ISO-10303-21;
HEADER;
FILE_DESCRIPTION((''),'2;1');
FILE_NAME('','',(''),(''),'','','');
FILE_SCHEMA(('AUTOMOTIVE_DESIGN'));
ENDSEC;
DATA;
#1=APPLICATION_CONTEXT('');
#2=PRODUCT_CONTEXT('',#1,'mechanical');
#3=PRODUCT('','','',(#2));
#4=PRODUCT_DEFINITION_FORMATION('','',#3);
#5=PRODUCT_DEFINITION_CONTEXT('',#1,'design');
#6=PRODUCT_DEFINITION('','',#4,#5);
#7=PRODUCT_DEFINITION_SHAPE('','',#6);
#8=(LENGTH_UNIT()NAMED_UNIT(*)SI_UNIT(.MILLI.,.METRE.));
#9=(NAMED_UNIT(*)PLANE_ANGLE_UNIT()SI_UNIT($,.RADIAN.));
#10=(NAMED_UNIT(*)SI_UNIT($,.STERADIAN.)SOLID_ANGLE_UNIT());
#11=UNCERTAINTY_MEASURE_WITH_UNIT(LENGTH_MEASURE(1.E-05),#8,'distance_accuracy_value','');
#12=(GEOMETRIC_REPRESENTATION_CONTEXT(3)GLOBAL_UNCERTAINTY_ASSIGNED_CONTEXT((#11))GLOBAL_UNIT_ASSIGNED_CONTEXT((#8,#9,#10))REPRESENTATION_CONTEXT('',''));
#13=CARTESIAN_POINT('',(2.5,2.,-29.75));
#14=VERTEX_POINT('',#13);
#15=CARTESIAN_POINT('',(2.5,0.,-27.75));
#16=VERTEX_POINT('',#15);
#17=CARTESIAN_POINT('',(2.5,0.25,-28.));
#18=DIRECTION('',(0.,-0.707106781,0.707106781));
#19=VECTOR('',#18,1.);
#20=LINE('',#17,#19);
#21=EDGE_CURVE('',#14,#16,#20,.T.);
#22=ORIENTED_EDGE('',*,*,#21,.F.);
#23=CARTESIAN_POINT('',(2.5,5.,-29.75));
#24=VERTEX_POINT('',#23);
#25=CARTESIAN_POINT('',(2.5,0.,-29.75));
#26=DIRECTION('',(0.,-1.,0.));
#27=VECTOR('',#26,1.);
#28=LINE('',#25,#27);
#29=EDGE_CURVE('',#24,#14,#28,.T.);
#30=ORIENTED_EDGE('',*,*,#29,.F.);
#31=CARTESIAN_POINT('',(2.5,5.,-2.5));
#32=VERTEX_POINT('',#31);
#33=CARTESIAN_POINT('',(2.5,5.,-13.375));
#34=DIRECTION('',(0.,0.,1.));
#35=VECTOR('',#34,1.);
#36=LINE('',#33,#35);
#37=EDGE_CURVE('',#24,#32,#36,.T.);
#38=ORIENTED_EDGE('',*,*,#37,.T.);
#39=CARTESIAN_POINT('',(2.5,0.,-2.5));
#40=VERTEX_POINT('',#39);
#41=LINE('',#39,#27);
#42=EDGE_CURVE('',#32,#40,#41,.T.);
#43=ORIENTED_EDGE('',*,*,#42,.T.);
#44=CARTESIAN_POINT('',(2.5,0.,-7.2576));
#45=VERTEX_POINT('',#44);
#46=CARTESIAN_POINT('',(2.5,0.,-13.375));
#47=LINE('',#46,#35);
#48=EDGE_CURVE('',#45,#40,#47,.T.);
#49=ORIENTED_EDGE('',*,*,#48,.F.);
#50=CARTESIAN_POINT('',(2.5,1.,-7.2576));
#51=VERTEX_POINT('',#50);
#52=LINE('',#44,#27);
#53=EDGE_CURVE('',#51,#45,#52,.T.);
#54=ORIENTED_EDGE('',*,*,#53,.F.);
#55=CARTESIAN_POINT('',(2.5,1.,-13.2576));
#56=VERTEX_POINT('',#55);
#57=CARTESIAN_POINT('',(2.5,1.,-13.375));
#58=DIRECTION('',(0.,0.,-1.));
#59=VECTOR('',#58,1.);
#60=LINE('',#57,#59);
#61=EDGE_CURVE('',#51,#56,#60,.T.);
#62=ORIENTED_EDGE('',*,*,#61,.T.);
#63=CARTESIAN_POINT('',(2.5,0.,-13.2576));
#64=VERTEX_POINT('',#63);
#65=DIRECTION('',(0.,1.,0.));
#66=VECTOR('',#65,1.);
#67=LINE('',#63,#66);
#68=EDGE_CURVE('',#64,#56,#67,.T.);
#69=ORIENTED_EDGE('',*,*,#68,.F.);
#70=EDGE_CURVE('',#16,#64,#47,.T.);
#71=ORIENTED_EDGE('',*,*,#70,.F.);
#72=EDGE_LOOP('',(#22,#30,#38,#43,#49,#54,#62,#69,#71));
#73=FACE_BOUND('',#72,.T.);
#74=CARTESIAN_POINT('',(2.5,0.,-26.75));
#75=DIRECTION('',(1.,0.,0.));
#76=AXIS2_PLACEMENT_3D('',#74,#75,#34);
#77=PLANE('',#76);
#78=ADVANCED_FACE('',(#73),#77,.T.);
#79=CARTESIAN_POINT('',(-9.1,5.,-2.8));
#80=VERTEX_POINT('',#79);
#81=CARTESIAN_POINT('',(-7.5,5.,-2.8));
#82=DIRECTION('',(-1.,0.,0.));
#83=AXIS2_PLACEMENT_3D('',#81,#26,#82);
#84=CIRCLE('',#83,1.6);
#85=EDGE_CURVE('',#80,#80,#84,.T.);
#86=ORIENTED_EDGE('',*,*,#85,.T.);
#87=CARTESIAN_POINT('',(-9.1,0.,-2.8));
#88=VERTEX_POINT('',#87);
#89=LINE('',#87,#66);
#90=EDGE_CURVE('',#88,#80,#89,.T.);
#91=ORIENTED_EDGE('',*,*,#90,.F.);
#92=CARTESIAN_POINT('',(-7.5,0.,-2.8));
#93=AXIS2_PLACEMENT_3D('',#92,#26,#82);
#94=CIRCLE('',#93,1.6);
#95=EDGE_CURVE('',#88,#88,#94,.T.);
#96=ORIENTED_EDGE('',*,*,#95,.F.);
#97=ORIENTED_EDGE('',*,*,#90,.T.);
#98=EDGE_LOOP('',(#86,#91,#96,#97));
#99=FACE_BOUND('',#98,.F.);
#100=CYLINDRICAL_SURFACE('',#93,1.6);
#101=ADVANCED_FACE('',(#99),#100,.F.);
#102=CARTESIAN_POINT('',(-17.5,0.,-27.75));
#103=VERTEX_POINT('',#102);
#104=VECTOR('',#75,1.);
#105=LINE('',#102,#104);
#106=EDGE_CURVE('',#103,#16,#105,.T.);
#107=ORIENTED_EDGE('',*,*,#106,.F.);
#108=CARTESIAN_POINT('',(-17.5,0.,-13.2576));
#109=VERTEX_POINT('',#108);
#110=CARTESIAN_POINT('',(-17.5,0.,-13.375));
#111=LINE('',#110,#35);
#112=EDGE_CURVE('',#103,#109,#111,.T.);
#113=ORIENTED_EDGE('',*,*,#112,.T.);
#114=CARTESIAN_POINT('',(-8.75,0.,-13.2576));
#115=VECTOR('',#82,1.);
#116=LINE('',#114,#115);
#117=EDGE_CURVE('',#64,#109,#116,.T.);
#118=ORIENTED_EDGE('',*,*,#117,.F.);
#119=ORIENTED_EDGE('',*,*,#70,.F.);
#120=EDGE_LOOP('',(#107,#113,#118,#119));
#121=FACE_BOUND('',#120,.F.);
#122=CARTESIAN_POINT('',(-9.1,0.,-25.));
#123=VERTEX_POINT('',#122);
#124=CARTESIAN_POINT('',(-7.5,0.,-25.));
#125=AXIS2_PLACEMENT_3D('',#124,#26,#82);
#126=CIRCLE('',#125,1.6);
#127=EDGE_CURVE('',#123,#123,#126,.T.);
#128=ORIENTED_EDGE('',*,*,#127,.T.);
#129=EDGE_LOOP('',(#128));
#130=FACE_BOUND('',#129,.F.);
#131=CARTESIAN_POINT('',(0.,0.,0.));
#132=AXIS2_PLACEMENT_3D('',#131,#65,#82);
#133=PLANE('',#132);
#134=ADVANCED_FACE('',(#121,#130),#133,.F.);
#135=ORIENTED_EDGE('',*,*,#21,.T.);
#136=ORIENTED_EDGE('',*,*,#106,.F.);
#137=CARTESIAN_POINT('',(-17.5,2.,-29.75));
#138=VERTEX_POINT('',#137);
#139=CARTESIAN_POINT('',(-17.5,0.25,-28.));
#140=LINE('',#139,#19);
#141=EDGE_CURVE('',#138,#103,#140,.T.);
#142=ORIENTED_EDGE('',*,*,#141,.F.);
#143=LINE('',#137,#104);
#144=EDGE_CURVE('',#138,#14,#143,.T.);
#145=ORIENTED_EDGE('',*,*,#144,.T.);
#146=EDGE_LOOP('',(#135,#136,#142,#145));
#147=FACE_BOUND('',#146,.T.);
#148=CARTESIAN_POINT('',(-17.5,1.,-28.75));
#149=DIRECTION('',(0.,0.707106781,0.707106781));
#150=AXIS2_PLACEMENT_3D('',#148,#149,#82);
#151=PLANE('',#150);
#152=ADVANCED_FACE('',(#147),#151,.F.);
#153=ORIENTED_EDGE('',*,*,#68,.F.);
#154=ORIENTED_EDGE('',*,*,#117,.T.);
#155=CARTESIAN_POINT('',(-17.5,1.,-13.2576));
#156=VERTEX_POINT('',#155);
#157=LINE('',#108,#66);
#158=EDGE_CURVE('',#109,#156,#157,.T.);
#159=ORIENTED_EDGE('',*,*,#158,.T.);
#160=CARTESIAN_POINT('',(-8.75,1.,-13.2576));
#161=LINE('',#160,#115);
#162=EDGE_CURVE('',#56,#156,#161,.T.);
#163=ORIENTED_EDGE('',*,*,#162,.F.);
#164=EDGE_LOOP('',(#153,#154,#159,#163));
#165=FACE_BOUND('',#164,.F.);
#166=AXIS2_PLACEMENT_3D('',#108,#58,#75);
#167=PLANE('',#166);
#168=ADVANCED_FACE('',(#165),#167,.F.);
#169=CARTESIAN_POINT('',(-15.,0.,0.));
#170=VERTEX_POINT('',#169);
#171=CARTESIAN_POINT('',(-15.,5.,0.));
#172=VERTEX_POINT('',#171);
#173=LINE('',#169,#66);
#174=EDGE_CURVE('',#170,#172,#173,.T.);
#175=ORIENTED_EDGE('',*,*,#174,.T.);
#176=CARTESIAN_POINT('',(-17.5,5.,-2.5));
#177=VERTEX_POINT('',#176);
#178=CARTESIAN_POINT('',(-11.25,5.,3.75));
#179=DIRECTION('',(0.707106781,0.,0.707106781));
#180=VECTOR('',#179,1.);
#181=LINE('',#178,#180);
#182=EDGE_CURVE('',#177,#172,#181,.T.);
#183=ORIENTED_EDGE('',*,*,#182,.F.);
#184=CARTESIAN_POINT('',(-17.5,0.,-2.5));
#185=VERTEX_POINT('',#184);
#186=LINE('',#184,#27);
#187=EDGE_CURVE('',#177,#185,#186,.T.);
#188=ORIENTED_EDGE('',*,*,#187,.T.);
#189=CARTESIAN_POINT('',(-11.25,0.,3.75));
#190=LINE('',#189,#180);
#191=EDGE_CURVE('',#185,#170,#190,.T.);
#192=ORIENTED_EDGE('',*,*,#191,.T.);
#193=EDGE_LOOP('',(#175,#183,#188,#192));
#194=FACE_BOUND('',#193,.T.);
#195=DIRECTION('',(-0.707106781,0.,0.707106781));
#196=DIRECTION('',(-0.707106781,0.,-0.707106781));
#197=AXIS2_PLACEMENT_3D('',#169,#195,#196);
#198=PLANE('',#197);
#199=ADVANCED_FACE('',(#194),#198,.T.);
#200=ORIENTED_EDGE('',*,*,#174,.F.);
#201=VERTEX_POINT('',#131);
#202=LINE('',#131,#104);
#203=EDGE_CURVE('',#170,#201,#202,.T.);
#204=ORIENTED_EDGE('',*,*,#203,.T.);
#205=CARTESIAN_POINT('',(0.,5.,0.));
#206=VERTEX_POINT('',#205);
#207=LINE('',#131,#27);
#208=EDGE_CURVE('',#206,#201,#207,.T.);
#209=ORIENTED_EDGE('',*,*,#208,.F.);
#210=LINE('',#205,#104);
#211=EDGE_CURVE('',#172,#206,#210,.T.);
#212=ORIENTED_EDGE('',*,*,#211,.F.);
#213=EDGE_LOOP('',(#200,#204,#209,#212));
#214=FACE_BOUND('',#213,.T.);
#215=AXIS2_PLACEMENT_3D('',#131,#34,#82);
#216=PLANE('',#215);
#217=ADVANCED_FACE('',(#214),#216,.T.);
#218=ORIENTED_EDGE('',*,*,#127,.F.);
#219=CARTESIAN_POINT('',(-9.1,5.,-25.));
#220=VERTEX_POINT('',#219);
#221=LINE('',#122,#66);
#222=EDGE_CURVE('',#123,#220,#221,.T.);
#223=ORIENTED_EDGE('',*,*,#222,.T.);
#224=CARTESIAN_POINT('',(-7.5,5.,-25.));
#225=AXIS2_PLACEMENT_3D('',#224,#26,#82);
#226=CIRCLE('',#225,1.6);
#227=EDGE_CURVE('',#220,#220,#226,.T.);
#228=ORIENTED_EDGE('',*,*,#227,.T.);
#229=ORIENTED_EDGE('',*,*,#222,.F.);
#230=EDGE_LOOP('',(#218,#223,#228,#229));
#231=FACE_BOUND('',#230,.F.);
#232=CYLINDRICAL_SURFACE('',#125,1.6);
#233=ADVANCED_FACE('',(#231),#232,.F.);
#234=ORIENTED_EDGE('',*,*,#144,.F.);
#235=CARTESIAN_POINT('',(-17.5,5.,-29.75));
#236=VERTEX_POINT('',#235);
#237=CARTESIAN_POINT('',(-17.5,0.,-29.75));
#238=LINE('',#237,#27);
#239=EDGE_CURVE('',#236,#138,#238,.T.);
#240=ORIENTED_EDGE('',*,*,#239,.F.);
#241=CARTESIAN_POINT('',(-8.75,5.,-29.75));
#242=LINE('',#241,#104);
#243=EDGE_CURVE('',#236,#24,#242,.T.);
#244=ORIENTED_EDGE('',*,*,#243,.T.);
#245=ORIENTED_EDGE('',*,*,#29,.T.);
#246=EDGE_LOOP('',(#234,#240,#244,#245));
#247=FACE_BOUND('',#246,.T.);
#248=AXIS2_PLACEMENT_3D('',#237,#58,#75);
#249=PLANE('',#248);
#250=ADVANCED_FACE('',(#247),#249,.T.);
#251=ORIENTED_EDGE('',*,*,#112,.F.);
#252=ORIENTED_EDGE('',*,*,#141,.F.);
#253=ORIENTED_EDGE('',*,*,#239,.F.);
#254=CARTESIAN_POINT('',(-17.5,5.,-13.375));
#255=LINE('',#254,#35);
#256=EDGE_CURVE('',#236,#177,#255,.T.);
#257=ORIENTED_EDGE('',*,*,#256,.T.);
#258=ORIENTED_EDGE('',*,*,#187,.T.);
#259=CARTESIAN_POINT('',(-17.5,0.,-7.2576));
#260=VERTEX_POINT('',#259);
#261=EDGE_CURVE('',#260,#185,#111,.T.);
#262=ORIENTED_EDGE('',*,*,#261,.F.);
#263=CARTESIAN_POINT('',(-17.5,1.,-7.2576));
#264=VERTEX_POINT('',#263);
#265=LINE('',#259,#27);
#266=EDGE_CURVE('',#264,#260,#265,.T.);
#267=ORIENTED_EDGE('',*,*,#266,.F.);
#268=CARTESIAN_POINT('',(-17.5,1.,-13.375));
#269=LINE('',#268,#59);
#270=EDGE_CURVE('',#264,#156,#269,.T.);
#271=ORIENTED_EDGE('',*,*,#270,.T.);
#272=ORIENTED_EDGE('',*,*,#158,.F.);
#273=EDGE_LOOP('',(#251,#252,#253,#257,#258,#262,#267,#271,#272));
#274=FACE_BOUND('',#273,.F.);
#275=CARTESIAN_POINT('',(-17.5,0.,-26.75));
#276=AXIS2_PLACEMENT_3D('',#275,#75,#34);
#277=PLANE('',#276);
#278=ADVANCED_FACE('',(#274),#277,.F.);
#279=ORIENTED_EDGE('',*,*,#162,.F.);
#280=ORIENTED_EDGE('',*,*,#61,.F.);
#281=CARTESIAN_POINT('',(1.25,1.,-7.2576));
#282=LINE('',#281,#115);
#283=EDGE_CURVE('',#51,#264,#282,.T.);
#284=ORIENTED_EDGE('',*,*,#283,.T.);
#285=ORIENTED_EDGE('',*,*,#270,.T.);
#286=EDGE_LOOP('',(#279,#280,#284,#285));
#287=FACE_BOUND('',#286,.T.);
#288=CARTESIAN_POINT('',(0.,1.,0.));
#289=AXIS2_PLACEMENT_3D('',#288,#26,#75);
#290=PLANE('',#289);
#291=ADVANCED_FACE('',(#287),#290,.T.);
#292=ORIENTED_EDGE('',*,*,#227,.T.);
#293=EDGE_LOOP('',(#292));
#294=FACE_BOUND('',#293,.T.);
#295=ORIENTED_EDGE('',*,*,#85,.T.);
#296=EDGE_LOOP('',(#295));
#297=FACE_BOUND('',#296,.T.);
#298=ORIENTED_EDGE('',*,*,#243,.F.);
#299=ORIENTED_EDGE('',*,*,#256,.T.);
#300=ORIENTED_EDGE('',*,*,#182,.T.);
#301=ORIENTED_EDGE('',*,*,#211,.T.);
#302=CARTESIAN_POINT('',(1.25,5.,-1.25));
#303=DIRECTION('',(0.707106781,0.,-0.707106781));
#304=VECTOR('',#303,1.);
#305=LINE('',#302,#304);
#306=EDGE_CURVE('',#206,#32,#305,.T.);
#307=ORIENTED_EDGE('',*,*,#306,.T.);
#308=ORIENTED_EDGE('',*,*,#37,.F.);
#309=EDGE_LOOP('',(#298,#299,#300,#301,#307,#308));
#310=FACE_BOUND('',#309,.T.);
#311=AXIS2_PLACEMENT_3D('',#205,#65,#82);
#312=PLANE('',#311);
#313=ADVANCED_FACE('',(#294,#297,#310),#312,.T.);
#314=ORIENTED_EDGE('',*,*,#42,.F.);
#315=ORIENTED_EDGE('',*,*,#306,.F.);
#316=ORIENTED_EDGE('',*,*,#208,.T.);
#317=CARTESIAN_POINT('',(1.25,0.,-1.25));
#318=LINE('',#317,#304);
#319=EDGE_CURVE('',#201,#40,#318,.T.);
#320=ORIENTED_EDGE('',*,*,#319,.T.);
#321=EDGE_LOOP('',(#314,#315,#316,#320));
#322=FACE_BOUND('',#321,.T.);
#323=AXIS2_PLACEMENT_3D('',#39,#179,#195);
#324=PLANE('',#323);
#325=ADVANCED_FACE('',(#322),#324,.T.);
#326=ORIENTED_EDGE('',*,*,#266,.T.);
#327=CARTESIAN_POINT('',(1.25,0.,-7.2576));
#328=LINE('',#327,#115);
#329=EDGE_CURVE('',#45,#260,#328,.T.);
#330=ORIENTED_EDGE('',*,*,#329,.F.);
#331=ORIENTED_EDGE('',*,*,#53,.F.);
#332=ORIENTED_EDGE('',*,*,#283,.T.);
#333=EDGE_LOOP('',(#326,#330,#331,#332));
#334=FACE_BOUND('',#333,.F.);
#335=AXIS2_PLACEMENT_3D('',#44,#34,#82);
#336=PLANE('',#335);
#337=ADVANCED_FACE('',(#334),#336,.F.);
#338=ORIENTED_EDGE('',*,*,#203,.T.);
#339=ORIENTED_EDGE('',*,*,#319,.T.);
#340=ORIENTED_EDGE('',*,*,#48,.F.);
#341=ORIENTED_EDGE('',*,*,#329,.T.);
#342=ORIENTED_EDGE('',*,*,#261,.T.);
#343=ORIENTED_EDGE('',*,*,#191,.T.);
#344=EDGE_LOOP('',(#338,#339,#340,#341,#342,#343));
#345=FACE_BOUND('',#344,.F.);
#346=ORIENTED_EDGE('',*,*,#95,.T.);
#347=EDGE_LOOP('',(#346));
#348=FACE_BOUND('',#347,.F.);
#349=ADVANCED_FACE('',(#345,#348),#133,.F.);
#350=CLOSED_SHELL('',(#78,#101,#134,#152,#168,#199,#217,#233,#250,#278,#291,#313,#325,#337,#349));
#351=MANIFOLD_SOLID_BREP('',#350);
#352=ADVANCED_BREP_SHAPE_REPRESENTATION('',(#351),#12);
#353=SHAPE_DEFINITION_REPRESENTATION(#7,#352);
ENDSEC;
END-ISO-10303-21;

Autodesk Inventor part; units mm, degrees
ref_plane "YZ Plane" through (0, 0, 0) normal (1, 0, 0) x (0, 1, 0)
ref_plane "XZ Plane" through (0, 0, 0) normal (0, 1, 0) x (-1, 0, 0)
ref_plane "XY Plane" through (0, 0, 0) normal (0, 0, 1) x (1, 0, 0)
sketch "Эскиз1" plane through (0, 0, 0) normal (0, 1, 0) x (-1, 0, 0)
  line L0 (17.5, -26.75) -> (-2.5, -26.75)
  line L1 (17.5, -26.75) -> (17.5, -2.5)
  line L2 (15, 0) -> (17.5, -2.5)
  line L3 (0, 0) -> (15, 0)
  line L4 (-2.5, -2.5) -> (0, 0)
  line L5 (-2.5, -26.75) -> (-2.5, -2.5)
  circle A0 centre (7.5, -2.8) radius 1.6
  circle A1 centre (7.5, -25) radius 1.6
  point P0 (7.5, -40)
extrude "Выдавливание1" add sketch "Эскиз1" along normal blind 5
sketch "Эскиз2" plane through (0, 0, 0) normal (0, -1, 0) x (1, 0, 0)
  line L0 (2.5, -2.5) -> (2.5, -26.75) projected
  line L1 (-17.5, -26.75) -> (-17.5, -2.5) projected
  line L2 (2.5, -7.2576) -> (-17.5, -7.2576)
  line L3 (-17.5, -7.2576) -> (-17.5, -13.2576)
  line L4 (-17.5, -13.2576) -> (2.5, -13.2576)
  line L5 (2.5, -13.2576) -> (2.5, -7.2576)
  point P0 (0, 0)
  dimension "d2" = 6
extrude "Выдавливание2" cut sketch "Эскиз2" against normal blind 1
move faces "Перенос1" translate (0, 0, -3) faces at (-4.1667, 1.6667, -26.75)
chamfer "Фаска1" distance 2 angle 45 1 edges at (-7.5, 0, -29.75)
properties part number "КВ33.044.202 - Прижим ремня" material "Пластик АБС"
